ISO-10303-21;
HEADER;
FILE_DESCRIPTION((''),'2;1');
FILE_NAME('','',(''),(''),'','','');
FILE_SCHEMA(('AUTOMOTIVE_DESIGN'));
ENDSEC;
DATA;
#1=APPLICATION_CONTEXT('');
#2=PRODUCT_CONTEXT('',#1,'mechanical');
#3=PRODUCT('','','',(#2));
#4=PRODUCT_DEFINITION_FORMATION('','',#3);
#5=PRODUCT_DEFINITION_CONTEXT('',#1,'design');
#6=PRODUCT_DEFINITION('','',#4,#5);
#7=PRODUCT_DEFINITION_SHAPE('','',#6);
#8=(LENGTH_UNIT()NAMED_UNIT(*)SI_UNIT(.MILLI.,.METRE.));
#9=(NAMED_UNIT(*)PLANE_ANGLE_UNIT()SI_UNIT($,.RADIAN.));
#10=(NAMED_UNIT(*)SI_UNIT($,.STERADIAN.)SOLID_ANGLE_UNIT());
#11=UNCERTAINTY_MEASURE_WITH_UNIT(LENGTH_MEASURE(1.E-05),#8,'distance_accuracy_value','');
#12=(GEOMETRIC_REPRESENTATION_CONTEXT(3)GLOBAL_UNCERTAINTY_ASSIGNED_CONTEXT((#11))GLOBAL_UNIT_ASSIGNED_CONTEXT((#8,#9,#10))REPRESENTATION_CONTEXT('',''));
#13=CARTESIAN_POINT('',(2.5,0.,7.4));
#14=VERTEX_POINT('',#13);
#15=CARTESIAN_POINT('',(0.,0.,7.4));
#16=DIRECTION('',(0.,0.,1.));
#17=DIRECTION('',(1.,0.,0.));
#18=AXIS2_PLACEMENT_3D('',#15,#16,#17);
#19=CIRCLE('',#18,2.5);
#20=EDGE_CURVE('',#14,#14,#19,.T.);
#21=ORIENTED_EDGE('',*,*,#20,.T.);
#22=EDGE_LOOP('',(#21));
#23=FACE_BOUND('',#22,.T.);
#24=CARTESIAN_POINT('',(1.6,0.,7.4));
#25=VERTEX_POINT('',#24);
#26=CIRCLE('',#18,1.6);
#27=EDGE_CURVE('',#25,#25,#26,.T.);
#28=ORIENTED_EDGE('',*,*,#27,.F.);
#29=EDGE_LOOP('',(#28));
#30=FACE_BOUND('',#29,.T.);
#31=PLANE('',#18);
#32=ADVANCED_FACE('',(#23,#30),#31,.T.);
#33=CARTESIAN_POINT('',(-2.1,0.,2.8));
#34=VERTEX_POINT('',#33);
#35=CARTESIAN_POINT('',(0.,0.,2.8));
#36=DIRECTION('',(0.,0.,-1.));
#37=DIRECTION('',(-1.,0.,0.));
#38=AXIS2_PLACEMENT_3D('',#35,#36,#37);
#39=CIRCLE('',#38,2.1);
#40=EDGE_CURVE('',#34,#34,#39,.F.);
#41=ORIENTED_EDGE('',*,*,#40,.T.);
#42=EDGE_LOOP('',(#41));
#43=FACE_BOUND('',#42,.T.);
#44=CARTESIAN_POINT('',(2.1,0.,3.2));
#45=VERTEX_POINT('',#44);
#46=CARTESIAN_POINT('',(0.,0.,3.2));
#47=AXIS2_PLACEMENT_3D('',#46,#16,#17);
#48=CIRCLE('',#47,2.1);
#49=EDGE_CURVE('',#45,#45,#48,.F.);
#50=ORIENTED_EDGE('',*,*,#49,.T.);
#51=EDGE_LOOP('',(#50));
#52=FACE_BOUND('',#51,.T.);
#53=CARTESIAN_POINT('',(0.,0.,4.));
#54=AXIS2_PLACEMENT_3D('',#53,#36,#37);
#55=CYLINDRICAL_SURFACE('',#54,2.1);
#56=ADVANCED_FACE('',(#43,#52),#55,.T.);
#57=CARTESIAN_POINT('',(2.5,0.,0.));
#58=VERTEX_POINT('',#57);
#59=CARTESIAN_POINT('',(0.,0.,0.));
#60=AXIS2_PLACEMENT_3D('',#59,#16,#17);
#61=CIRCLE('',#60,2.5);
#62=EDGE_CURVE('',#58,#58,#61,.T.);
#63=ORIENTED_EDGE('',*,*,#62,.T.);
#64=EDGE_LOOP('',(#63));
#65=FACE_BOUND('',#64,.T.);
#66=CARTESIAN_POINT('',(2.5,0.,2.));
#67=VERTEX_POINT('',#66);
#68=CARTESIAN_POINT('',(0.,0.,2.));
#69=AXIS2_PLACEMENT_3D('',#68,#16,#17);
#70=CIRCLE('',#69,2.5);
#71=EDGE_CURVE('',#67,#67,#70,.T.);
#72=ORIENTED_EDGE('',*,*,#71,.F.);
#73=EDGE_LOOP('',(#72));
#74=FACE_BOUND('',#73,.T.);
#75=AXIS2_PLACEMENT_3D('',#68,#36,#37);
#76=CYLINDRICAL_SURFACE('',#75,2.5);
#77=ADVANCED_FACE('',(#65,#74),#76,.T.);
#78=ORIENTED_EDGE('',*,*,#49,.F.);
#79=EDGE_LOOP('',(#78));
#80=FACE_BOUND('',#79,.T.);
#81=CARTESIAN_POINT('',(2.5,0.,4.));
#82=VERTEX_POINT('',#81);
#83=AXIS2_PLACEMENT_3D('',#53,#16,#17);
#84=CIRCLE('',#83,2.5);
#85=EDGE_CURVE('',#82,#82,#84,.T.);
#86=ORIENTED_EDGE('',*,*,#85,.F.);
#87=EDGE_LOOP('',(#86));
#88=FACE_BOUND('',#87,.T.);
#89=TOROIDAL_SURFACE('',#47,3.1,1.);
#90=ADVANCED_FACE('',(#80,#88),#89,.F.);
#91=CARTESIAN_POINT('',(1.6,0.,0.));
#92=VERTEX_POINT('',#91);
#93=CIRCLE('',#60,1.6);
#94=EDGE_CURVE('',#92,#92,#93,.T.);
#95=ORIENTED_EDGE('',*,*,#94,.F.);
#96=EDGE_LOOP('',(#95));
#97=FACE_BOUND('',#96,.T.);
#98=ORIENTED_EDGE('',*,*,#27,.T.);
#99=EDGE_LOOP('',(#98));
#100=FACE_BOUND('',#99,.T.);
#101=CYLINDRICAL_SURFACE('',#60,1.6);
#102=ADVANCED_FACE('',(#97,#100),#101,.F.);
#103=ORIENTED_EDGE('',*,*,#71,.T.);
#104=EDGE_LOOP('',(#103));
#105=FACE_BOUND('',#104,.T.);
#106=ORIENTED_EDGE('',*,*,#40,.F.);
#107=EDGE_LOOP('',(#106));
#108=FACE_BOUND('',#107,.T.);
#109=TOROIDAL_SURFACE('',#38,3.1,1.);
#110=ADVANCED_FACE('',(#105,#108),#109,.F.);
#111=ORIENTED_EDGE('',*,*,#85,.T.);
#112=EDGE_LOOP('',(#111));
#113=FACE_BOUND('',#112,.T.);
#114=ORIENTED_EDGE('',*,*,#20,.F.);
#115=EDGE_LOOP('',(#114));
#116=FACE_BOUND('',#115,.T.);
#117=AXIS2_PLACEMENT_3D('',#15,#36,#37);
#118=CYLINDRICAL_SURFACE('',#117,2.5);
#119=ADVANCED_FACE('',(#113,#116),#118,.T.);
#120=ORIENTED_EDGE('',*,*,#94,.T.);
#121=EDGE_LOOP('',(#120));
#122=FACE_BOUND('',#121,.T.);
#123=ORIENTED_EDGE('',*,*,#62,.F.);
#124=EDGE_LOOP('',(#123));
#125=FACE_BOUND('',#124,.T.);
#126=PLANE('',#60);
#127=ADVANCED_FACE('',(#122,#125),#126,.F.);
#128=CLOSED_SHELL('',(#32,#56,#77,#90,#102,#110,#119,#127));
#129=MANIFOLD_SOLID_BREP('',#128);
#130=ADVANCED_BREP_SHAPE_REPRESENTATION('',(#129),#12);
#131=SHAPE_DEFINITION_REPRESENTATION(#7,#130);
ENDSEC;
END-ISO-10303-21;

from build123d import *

# Parameters (mm, degrees)
SKETCH_1_R          = 2.5
EXTRUDE_1_DEPTH     = 2
SKETCH_2_R          = 2.1
EXTRUDE_2_DEPTH     = 2
SKETCH_3_R          = 2.5
EXTRUDE_3_DEPTH     = 3.4
SKETCH_4_R          = 1.6
CUT_EXTRUDE_1_DEPTH = 9.201219422
FILLET_1_R          = 1


with BuildPart() as part:
    # Эскиз1 → Бобышка-Вытянуть1 (new body)
    with BuildSketch(Plane.XY):
        Circle(SKETCH_1_R)
    extrude(amount=EXTRUDE_1_DEPTH)

    # Эскиз2 → Бобышка-Вытянуть2 (add)
    with BuildSketch(Plane.XY.offset(2)):
        Circle(SKETCH_2_R)
    extrude(amount=EXTRUDE_2_DEPTH)

    # Эскиз3 → Бобышка-Вытянуть3 (add)
    with BuildSketch(Plane.XY.offset(4)):
        Circle(SKETCH_3_R)
    extrude(amount=EXTRUDE_3_DEPTH)

    # Эскиз4 → Вырез-Вытянуть1 (cut, through all)
    with BuildSketch(Plane.XY.offset(7.4)):
        Circle(SKETCH_4_R)
    extrude(amount=-CUT_EXTRUDE_1_DEPTH, mode=Mode.SUBTRACT)

    # Скругление1
    # the kernel refuses this fillet: 1 mm, written as the material it adds along each edge
    with BuildSketch(Plane(origin=(0, 0, 2), x_dir=(1, 0, 0), z_dir=(0, -1, 0))) as fillet_1_piece_1:
        with BuildLine():
            CenterArc((3.1, 0.8), FILLET_1_R, 180, 53.130102354)
            Line((2.5, 0), (2.488, -0.016))
            ThreePointArc((2.488, -0.016), (2.3, -0.02), (2.1, -0.02))
            Line((2.1, -0.02), (2.08, 0))
            Line((2.08, 0), (2.08, 0.8))
            Line((2.08, 0.8), (2.1, 0.8))
        make_face()
    revolve(axis=Axis((0, 0, 2), (0, 0, 1)))
    with BuildSketch(Plane(origin=(0, 0, 4), x_dir=(1, 0, 0), z_dir=(0, -1, 0))) as fillet_1_piece_2:
        with BuildLine():
            CenterArc((3.1, -0.8), FILLET_1_R, 126.869897646, 53.130102354)
            Line((2.1, -0.8), (2.08, -0.8))
            Line((2.08, -0.8), (2.08, 0))
            Line((2.08, 0), (2.1, 0.02))
            ThreePointArc((2.1, 0.02), (2.3, 0.02), (2.488, 0.016))
            Line((2.488, 0.016), (2.5, 0))
        make_face()
    revolve(axis=Axis((0, 0, 4), (0, 0, 1)))


solid = part.part
